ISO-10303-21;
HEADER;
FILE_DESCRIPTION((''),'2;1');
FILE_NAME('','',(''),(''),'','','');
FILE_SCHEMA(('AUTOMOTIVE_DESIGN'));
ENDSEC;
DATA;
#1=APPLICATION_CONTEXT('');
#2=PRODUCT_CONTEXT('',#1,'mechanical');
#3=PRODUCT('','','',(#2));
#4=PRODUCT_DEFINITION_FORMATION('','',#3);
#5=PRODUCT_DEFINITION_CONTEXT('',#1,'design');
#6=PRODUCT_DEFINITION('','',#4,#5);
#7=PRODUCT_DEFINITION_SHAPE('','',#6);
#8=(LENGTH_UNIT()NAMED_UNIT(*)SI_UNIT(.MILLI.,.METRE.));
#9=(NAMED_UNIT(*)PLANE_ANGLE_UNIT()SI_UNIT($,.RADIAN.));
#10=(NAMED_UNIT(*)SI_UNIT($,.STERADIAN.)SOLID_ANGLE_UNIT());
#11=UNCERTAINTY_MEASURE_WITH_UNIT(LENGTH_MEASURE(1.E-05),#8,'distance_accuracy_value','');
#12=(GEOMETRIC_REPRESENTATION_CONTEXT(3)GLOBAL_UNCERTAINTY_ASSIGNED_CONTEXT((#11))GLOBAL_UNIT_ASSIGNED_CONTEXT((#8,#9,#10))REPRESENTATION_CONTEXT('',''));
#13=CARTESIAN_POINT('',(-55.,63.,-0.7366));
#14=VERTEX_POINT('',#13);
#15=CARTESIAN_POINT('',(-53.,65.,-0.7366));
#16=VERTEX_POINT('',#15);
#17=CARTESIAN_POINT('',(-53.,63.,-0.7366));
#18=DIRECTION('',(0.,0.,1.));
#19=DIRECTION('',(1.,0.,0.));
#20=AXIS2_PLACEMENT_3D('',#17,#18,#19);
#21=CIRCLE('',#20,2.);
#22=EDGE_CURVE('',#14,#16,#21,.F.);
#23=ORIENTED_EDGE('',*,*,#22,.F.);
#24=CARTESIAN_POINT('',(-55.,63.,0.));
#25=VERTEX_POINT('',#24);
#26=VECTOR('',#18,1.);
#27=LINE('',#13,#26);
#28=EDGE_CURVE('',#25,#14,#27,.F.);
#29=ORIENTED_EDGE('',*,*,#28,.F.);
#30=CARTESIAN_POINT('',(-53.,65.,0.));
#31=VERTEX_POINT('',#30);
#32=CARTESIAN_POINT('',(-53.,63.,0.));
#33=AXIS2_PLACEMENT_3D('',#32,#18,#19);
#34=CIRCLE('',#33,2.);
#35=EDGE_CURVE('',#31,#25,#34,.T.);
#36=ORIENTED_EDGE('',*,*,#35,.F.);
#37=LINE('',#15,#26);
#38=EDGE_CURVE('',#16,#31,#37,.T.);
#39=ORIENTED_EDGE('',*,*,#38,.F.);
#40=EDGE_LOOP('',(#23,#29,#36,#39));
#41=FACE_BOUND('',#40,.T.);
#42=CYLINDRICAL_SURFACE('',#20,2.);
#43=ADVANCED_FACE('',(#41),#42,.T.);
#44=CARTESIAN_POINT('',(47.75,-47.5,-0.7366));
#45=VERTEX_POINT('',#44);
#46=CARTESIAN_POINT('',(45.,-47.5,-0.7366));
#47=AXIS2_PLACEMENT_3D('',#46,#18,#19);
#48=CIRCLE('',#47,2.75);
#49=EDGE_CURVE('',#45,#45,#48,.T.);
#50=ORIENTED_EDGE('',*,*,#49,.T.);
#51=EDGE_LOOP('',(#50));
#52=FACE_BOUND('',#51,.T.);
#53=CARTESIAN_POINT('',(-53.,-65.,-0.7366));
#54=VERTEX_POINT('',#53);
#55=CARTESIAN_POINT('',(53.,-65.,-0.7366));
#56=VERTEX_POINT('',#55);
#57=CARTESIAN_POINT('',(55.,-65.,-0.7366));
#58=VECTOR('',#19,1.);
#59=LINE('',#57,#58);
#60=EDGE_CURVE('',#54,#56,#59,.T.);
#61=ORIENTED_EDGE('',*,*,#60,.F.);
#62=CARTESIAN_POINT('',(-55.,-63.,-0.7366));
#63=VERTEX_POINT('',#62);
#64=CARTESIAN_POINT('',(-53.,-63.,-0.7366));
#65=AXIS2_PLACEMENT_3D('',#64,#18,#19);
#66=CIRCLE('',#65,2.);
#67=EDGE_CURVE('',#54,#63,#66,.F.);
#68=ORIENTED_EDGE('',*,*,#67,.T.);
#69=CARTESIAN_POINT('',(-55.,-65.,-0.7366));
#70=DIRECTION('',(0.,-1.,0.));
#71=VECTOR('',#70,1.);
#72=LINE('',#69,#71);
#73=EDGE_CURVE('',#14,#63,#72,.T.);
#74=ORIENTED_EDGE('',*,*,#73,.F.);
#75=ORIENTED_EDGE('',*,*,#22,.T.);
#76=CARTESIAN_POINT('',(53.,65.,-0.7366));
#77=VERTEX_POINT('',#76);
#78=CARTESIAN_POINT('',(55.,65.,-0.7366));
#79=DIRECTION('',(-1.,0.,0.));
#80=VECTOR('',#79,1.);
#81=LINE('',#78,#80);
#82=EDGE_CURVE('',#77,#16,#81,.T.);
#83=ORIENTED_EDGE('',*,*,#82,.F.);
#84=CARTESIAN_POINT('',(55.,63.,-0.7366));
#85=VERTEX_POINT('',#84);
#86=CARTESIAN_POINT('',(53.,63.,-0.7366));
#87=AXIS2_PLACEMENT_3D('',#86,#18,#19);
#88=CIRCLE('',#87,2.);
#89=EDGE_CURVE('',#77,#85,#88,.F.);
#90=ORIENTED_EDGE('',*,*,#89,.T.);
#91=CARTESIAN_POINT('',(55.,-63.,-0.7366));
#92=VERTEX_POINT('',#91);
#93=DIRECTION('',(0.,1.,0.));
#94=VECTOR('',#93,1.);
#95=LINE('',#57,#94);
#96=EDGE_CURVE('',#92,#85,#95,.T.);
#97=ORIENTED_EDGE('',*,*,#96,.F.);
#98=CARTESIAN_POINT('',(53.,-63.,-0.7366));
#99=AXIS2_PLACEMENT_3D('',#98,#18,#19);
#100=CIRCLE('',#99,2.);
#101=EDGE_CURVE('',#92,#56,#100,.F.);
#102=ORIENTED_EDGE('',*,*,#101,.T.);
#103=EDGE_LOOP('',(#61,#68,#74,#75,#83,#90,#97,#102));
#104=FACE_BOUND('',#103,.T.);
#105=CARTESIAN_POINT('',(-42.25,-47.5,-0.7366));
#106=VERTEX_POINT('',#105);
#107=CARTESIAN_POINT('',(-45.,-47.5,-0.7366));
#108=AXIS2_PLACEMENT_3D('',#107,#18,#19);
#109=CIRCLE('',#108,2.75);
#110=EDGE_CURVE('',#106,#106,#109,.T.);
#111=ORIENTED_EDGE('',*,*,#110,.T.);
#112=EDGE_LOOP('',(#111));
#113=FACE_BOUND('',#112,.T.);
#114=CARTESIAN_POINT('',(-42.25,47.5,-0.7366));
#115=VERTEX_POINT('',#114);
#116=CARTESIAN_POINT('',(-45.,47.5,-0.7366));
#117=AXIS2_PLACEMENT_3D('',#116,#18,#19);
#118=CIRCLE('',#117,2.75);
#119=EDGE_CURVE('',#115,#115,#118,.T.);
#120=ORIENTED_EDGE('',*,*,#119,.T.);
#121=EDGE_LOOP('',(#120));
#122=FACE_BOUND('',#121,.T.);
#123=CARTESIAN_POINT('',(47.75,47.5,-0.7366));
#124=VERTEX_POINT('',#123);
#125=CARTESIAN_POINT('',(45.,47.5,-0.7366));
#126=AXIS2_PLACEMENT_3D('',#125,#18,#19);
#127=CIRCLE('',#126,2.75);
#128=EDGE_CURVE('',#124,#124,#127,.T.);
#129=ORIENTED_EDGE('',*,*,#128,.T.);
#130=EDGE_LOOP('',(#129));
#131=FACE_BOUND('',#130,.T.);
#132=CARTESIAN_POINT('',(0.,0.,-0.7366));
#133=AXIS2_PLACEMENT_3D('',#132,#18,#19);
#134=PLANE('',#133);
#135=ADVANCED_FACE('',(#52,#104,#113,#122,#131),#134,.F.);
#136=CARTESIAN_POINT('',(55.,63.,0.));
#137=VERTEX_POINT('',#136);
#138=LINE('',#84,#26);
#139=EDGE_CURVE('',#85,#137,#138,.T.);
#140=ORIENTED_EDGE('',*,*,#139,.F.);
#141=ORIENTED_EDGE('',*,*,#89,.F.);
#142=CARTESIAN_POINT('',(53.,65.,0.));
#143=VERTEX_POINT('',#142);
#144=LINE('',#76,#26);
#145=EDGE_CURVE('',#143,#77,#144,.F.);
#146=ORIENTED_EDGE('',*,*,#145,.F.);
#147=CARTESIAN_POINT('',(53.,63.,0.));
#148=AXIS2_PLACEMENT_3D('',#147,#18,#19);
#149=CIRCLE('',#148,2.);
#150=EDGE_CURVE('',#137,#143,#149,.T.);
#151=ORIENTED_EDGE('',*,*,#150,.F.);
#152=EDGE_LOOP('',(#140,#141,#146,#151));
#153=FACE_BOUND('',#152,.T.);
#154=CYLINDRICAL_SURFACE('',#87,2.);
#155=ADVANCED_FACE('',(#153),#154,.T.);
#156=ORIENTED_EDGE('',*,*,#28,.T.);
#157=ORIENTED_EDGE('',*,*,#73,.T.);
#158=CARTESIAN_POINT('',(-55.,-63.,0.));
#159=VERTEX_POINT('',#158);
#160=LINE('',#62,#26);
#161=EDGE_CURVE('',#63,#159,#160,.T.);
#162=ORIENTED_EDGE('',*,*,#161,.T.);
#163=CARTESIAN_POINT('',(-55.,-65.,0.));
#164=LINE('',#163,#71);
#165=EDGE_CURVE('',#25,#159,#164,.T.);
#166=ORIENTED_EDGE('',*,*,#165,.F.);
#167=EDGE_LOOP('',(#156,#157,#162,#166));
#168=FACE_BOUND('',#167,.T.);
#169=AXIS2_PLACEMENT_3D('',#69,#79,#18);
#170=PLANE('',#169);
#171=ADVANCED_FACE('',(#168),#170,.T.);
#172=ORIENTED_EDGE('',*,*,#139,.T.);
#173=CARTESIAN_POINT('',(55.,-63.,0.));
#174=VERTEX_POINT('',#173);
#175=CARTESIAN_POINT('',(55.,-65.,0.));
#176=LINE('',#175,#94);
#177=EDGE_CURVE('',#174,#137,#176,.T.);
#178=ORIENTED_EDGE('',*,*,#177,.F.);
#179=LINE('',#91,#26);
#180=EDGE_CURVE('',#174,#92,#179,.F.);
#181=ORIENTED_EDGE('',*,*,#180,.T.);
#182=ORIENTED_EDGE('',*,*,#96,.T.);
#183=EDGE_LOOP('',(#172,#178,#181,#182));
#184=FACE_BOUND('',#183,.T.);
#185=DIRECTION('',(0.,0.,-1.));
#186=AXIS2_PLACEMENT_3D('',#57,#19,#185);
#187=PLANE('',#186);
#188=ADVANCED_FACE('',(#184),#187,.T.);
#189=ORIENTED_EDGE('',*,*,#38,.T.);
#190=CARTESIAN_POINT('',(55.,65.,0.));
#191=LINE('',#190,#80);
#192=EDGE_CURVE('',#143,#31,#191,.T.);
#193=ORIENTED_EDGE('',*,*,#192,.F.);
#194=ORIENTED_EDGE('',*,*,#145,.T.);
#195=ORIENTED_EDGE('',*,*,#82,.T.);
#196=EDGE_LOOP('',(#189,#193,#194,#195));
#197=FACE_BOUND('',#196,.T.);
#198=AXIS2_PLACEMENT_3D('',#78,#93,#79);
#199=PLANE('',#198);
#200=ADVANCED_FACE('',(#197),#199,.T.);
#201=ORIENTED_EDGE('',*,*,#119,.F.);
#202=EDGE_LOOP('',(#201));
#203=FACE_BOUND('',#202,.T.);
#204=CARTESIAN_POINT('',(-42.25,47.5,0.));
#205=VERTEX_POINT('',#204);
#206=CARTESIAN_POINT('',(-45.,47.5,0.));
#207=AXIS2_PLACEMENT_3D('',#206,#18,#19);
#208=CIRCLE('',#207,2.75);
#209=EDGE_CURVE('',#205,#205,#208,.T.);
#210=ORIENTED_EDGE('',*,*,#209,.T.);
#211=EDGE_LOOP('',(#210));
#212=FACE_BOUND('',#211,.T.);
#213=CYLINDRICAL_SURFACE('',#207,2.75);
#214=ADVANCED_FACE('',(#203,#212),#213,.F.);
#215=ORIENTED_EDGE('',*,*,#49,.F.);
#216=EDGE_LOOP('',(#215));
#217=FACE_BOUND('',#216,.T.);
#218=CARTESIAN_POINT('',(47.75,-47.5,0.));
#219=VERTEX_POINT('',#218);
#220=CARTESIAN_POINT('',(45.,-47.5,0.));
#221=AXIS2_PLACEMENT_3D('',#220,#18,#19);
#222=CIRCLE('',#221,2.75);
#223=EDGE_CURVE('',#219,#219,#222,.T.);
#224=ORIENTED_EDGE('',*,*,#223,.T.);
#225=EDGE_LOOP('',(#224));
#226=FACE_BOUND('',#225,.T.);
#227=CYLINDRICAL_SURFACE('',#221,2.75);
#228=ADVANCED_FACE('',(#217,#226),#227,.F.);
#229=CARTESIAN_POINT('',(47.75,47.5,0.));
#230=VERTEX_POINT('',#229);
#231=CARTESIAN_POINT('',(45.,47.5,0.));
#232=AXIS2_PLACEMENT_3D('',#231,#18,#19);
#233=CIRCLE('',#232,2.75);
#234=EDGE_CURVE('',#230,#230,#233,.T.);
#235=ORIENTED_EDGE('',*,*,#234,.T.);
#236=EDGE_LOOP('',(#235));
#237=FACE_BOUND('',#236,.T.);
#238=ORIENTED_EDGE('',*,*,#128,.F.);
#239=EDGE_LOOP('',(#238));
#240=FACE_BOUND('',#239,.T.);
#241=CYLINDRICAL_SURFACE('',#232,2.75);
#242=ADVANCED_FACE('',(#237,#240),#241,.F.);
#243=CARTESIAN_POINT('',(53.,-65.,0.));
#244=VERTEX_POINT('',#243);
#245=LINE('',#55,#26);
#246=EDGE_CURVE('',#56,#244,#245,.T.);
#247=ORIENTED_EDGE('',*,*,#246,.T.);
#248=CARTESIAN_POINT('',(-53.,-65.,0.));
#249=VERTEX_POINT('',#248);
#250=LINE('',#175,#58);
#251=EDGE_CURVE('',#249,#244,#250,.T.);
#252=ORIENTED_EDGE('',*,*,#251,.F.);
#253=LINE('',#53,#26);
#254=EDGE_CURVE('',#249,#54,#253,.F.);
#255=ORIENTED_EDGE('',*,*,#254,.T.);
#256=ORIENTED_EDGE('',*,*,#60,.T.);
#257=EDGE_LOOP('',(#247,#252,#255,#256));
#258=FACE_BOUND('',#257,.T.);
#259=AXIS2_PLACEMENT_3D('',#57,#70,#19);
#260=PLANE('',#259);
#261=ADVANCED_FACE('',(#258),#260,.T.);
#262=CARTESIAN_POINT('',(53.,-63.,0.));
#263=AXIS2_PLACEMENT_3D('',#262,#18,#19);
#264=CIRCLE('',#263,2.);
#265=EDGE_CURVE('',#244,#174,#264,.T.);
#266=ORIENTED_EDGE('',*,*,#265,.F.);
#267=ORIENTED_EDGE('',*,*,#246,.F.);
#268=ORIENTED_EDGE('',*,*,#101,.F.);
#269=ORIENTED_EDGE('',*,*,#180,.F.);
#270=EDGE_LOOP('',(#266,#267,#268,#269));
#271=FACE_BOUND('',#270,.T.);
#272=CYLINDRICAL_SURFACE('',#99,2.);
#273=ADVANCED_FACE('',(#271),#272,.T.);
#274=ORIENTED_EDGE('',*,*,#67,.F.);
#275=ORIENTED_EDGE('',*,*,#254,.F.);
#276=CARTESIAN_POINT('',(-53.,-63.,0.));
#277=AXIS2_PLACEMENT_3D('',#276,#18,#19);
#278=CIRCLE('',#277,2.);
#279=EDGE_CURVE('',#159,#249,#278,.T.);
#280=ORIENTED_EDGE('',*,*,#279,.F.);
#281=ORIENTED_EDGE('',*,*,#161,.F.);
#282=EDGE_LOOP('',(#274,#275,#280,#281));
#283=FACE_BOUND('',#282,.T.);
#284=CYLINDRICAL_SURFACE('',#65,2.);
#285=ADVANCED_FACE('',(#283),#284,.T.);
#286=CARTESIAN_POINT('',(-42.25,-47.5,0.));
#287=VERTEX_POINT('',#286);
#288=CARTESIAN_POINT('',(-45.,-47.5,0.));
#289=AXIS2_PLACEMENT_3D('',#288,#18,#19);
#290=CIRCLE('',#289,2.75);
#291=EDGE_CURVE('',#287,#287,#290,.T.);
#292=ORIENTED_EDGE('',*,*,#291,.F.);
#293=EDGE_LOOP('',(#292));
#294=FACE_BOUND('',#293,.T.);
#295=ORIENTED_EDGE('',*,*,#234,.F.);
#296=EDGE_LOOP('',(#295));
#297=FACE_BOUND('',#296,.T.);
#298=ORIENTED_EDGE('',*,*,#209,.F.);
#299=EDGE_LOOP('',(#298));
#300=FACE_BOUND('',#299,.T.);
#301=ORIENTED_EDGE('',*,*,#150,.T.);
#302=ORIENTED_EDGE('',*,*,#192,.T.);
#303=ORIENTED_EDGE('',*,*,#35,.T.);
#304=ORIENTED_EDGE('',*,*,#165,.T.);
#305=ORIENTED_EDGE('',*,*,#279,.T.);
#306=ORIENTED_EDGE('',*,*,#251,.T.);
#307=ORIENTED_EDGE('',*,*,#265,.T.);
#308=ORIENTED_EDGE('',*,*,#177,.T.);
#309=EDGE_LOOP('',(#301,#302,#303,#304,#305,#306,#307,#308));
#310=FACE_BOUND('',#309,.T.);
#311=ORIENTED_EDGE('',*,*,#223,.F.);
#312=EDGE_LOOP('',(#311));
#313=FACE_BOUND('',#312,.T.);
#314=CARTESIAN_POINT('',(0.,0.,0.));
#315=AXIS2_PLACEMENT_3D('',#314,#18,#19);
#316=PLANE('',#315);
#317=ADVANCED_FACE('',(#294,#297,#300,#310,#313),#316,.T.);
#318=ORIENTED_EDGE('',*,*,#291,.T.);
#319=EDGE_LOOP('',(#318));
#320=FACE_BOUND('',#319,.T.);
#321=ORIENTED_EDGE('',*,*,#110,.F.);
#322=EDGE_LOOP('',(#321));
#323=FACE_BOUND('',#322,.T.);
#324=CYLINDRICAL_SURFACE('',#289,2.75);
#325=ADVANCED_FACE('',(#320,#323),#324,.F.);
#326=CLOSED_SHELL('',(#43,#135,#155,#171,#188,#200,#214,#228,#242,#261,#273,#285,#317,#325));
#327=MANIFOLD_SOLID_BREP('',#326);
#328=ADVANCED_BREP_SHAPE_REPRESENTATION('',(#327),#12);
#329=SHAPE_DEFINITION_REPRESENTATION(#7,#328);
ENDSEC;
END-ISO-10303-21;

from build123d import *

# Parameters (mm, degrees)
ESQUISSE1_W               = 110
ESQUISSE1_H               = 130
T_LE_DE_BASE_PLI_E1_DEPTH = 0.7366
D_GAGEMENT_M51_D          = 5.5
COIN_BRIS_1_START         = -0.7366
COIN_BRIS_1_DEPTH         = 0.7366


# Read off the part's stored shape, not the designer's step: Coin-brisé1
# Sheet-metal steps are written as plain solids
with BuildPart() as part:
    # Esquisse1 → Tôle de base pliée1 (new body)
    with BuildSketch(Plane.XY):
        Rectangle(ESQUISSE1_W, ESQUISSE1_H)
    extrude(amount=-T_LE_DE_BASE_PLI_E1_DEPTH)

    # Dégagement M51 (through all)
    with Locations(Plane.XY):
        with Locations((-45, 47.5), (45, 47.5), (45, -47.5), (-45, -47.5)):
            Hole(D_GAGEMENT_M51_D / 2)

    # Coin-brisé1 outline → Coin-brisé1 (cut)
    with BuildSketch(Plane.XY.offset(COIN_BRIS_1_START)):
        with BuildLine():
            ThreePointArc((55, -63), (54.414213562, -64.414213562), (53, -65))
            Line((53, -65), (55, -65))
            Line((55, -65), (55, -63))
        make_face()
        with BuildLine():
            Line((-55, -65), (-53, -65))
            ThreePointArc((-53, -65), (-54.414213562, -64.414213562), (-55, -63))
            Line((-55, -63), (-55, -65))
        make_face()
        with BuildLine():
            ThreePointArc((53, 65), (54.414213562, 64.414213562), (55, 63))
            Line((55, 63), (55, 65))
            Line((55, 65), (53, 65))
        make_face()
        with BuildLine():
            Line((-55, 65), (-55, 63))
            ThreePointArc((-55, 63), (-54.414213562, 64.414213562), (-53, 65))
            Line((-53, 65), (-55, 65))
        make_face()
    extrude(amount=COIN_BRIS_1_DEPTH, mode=Mode.SUBTRACT)


solid = part.part
